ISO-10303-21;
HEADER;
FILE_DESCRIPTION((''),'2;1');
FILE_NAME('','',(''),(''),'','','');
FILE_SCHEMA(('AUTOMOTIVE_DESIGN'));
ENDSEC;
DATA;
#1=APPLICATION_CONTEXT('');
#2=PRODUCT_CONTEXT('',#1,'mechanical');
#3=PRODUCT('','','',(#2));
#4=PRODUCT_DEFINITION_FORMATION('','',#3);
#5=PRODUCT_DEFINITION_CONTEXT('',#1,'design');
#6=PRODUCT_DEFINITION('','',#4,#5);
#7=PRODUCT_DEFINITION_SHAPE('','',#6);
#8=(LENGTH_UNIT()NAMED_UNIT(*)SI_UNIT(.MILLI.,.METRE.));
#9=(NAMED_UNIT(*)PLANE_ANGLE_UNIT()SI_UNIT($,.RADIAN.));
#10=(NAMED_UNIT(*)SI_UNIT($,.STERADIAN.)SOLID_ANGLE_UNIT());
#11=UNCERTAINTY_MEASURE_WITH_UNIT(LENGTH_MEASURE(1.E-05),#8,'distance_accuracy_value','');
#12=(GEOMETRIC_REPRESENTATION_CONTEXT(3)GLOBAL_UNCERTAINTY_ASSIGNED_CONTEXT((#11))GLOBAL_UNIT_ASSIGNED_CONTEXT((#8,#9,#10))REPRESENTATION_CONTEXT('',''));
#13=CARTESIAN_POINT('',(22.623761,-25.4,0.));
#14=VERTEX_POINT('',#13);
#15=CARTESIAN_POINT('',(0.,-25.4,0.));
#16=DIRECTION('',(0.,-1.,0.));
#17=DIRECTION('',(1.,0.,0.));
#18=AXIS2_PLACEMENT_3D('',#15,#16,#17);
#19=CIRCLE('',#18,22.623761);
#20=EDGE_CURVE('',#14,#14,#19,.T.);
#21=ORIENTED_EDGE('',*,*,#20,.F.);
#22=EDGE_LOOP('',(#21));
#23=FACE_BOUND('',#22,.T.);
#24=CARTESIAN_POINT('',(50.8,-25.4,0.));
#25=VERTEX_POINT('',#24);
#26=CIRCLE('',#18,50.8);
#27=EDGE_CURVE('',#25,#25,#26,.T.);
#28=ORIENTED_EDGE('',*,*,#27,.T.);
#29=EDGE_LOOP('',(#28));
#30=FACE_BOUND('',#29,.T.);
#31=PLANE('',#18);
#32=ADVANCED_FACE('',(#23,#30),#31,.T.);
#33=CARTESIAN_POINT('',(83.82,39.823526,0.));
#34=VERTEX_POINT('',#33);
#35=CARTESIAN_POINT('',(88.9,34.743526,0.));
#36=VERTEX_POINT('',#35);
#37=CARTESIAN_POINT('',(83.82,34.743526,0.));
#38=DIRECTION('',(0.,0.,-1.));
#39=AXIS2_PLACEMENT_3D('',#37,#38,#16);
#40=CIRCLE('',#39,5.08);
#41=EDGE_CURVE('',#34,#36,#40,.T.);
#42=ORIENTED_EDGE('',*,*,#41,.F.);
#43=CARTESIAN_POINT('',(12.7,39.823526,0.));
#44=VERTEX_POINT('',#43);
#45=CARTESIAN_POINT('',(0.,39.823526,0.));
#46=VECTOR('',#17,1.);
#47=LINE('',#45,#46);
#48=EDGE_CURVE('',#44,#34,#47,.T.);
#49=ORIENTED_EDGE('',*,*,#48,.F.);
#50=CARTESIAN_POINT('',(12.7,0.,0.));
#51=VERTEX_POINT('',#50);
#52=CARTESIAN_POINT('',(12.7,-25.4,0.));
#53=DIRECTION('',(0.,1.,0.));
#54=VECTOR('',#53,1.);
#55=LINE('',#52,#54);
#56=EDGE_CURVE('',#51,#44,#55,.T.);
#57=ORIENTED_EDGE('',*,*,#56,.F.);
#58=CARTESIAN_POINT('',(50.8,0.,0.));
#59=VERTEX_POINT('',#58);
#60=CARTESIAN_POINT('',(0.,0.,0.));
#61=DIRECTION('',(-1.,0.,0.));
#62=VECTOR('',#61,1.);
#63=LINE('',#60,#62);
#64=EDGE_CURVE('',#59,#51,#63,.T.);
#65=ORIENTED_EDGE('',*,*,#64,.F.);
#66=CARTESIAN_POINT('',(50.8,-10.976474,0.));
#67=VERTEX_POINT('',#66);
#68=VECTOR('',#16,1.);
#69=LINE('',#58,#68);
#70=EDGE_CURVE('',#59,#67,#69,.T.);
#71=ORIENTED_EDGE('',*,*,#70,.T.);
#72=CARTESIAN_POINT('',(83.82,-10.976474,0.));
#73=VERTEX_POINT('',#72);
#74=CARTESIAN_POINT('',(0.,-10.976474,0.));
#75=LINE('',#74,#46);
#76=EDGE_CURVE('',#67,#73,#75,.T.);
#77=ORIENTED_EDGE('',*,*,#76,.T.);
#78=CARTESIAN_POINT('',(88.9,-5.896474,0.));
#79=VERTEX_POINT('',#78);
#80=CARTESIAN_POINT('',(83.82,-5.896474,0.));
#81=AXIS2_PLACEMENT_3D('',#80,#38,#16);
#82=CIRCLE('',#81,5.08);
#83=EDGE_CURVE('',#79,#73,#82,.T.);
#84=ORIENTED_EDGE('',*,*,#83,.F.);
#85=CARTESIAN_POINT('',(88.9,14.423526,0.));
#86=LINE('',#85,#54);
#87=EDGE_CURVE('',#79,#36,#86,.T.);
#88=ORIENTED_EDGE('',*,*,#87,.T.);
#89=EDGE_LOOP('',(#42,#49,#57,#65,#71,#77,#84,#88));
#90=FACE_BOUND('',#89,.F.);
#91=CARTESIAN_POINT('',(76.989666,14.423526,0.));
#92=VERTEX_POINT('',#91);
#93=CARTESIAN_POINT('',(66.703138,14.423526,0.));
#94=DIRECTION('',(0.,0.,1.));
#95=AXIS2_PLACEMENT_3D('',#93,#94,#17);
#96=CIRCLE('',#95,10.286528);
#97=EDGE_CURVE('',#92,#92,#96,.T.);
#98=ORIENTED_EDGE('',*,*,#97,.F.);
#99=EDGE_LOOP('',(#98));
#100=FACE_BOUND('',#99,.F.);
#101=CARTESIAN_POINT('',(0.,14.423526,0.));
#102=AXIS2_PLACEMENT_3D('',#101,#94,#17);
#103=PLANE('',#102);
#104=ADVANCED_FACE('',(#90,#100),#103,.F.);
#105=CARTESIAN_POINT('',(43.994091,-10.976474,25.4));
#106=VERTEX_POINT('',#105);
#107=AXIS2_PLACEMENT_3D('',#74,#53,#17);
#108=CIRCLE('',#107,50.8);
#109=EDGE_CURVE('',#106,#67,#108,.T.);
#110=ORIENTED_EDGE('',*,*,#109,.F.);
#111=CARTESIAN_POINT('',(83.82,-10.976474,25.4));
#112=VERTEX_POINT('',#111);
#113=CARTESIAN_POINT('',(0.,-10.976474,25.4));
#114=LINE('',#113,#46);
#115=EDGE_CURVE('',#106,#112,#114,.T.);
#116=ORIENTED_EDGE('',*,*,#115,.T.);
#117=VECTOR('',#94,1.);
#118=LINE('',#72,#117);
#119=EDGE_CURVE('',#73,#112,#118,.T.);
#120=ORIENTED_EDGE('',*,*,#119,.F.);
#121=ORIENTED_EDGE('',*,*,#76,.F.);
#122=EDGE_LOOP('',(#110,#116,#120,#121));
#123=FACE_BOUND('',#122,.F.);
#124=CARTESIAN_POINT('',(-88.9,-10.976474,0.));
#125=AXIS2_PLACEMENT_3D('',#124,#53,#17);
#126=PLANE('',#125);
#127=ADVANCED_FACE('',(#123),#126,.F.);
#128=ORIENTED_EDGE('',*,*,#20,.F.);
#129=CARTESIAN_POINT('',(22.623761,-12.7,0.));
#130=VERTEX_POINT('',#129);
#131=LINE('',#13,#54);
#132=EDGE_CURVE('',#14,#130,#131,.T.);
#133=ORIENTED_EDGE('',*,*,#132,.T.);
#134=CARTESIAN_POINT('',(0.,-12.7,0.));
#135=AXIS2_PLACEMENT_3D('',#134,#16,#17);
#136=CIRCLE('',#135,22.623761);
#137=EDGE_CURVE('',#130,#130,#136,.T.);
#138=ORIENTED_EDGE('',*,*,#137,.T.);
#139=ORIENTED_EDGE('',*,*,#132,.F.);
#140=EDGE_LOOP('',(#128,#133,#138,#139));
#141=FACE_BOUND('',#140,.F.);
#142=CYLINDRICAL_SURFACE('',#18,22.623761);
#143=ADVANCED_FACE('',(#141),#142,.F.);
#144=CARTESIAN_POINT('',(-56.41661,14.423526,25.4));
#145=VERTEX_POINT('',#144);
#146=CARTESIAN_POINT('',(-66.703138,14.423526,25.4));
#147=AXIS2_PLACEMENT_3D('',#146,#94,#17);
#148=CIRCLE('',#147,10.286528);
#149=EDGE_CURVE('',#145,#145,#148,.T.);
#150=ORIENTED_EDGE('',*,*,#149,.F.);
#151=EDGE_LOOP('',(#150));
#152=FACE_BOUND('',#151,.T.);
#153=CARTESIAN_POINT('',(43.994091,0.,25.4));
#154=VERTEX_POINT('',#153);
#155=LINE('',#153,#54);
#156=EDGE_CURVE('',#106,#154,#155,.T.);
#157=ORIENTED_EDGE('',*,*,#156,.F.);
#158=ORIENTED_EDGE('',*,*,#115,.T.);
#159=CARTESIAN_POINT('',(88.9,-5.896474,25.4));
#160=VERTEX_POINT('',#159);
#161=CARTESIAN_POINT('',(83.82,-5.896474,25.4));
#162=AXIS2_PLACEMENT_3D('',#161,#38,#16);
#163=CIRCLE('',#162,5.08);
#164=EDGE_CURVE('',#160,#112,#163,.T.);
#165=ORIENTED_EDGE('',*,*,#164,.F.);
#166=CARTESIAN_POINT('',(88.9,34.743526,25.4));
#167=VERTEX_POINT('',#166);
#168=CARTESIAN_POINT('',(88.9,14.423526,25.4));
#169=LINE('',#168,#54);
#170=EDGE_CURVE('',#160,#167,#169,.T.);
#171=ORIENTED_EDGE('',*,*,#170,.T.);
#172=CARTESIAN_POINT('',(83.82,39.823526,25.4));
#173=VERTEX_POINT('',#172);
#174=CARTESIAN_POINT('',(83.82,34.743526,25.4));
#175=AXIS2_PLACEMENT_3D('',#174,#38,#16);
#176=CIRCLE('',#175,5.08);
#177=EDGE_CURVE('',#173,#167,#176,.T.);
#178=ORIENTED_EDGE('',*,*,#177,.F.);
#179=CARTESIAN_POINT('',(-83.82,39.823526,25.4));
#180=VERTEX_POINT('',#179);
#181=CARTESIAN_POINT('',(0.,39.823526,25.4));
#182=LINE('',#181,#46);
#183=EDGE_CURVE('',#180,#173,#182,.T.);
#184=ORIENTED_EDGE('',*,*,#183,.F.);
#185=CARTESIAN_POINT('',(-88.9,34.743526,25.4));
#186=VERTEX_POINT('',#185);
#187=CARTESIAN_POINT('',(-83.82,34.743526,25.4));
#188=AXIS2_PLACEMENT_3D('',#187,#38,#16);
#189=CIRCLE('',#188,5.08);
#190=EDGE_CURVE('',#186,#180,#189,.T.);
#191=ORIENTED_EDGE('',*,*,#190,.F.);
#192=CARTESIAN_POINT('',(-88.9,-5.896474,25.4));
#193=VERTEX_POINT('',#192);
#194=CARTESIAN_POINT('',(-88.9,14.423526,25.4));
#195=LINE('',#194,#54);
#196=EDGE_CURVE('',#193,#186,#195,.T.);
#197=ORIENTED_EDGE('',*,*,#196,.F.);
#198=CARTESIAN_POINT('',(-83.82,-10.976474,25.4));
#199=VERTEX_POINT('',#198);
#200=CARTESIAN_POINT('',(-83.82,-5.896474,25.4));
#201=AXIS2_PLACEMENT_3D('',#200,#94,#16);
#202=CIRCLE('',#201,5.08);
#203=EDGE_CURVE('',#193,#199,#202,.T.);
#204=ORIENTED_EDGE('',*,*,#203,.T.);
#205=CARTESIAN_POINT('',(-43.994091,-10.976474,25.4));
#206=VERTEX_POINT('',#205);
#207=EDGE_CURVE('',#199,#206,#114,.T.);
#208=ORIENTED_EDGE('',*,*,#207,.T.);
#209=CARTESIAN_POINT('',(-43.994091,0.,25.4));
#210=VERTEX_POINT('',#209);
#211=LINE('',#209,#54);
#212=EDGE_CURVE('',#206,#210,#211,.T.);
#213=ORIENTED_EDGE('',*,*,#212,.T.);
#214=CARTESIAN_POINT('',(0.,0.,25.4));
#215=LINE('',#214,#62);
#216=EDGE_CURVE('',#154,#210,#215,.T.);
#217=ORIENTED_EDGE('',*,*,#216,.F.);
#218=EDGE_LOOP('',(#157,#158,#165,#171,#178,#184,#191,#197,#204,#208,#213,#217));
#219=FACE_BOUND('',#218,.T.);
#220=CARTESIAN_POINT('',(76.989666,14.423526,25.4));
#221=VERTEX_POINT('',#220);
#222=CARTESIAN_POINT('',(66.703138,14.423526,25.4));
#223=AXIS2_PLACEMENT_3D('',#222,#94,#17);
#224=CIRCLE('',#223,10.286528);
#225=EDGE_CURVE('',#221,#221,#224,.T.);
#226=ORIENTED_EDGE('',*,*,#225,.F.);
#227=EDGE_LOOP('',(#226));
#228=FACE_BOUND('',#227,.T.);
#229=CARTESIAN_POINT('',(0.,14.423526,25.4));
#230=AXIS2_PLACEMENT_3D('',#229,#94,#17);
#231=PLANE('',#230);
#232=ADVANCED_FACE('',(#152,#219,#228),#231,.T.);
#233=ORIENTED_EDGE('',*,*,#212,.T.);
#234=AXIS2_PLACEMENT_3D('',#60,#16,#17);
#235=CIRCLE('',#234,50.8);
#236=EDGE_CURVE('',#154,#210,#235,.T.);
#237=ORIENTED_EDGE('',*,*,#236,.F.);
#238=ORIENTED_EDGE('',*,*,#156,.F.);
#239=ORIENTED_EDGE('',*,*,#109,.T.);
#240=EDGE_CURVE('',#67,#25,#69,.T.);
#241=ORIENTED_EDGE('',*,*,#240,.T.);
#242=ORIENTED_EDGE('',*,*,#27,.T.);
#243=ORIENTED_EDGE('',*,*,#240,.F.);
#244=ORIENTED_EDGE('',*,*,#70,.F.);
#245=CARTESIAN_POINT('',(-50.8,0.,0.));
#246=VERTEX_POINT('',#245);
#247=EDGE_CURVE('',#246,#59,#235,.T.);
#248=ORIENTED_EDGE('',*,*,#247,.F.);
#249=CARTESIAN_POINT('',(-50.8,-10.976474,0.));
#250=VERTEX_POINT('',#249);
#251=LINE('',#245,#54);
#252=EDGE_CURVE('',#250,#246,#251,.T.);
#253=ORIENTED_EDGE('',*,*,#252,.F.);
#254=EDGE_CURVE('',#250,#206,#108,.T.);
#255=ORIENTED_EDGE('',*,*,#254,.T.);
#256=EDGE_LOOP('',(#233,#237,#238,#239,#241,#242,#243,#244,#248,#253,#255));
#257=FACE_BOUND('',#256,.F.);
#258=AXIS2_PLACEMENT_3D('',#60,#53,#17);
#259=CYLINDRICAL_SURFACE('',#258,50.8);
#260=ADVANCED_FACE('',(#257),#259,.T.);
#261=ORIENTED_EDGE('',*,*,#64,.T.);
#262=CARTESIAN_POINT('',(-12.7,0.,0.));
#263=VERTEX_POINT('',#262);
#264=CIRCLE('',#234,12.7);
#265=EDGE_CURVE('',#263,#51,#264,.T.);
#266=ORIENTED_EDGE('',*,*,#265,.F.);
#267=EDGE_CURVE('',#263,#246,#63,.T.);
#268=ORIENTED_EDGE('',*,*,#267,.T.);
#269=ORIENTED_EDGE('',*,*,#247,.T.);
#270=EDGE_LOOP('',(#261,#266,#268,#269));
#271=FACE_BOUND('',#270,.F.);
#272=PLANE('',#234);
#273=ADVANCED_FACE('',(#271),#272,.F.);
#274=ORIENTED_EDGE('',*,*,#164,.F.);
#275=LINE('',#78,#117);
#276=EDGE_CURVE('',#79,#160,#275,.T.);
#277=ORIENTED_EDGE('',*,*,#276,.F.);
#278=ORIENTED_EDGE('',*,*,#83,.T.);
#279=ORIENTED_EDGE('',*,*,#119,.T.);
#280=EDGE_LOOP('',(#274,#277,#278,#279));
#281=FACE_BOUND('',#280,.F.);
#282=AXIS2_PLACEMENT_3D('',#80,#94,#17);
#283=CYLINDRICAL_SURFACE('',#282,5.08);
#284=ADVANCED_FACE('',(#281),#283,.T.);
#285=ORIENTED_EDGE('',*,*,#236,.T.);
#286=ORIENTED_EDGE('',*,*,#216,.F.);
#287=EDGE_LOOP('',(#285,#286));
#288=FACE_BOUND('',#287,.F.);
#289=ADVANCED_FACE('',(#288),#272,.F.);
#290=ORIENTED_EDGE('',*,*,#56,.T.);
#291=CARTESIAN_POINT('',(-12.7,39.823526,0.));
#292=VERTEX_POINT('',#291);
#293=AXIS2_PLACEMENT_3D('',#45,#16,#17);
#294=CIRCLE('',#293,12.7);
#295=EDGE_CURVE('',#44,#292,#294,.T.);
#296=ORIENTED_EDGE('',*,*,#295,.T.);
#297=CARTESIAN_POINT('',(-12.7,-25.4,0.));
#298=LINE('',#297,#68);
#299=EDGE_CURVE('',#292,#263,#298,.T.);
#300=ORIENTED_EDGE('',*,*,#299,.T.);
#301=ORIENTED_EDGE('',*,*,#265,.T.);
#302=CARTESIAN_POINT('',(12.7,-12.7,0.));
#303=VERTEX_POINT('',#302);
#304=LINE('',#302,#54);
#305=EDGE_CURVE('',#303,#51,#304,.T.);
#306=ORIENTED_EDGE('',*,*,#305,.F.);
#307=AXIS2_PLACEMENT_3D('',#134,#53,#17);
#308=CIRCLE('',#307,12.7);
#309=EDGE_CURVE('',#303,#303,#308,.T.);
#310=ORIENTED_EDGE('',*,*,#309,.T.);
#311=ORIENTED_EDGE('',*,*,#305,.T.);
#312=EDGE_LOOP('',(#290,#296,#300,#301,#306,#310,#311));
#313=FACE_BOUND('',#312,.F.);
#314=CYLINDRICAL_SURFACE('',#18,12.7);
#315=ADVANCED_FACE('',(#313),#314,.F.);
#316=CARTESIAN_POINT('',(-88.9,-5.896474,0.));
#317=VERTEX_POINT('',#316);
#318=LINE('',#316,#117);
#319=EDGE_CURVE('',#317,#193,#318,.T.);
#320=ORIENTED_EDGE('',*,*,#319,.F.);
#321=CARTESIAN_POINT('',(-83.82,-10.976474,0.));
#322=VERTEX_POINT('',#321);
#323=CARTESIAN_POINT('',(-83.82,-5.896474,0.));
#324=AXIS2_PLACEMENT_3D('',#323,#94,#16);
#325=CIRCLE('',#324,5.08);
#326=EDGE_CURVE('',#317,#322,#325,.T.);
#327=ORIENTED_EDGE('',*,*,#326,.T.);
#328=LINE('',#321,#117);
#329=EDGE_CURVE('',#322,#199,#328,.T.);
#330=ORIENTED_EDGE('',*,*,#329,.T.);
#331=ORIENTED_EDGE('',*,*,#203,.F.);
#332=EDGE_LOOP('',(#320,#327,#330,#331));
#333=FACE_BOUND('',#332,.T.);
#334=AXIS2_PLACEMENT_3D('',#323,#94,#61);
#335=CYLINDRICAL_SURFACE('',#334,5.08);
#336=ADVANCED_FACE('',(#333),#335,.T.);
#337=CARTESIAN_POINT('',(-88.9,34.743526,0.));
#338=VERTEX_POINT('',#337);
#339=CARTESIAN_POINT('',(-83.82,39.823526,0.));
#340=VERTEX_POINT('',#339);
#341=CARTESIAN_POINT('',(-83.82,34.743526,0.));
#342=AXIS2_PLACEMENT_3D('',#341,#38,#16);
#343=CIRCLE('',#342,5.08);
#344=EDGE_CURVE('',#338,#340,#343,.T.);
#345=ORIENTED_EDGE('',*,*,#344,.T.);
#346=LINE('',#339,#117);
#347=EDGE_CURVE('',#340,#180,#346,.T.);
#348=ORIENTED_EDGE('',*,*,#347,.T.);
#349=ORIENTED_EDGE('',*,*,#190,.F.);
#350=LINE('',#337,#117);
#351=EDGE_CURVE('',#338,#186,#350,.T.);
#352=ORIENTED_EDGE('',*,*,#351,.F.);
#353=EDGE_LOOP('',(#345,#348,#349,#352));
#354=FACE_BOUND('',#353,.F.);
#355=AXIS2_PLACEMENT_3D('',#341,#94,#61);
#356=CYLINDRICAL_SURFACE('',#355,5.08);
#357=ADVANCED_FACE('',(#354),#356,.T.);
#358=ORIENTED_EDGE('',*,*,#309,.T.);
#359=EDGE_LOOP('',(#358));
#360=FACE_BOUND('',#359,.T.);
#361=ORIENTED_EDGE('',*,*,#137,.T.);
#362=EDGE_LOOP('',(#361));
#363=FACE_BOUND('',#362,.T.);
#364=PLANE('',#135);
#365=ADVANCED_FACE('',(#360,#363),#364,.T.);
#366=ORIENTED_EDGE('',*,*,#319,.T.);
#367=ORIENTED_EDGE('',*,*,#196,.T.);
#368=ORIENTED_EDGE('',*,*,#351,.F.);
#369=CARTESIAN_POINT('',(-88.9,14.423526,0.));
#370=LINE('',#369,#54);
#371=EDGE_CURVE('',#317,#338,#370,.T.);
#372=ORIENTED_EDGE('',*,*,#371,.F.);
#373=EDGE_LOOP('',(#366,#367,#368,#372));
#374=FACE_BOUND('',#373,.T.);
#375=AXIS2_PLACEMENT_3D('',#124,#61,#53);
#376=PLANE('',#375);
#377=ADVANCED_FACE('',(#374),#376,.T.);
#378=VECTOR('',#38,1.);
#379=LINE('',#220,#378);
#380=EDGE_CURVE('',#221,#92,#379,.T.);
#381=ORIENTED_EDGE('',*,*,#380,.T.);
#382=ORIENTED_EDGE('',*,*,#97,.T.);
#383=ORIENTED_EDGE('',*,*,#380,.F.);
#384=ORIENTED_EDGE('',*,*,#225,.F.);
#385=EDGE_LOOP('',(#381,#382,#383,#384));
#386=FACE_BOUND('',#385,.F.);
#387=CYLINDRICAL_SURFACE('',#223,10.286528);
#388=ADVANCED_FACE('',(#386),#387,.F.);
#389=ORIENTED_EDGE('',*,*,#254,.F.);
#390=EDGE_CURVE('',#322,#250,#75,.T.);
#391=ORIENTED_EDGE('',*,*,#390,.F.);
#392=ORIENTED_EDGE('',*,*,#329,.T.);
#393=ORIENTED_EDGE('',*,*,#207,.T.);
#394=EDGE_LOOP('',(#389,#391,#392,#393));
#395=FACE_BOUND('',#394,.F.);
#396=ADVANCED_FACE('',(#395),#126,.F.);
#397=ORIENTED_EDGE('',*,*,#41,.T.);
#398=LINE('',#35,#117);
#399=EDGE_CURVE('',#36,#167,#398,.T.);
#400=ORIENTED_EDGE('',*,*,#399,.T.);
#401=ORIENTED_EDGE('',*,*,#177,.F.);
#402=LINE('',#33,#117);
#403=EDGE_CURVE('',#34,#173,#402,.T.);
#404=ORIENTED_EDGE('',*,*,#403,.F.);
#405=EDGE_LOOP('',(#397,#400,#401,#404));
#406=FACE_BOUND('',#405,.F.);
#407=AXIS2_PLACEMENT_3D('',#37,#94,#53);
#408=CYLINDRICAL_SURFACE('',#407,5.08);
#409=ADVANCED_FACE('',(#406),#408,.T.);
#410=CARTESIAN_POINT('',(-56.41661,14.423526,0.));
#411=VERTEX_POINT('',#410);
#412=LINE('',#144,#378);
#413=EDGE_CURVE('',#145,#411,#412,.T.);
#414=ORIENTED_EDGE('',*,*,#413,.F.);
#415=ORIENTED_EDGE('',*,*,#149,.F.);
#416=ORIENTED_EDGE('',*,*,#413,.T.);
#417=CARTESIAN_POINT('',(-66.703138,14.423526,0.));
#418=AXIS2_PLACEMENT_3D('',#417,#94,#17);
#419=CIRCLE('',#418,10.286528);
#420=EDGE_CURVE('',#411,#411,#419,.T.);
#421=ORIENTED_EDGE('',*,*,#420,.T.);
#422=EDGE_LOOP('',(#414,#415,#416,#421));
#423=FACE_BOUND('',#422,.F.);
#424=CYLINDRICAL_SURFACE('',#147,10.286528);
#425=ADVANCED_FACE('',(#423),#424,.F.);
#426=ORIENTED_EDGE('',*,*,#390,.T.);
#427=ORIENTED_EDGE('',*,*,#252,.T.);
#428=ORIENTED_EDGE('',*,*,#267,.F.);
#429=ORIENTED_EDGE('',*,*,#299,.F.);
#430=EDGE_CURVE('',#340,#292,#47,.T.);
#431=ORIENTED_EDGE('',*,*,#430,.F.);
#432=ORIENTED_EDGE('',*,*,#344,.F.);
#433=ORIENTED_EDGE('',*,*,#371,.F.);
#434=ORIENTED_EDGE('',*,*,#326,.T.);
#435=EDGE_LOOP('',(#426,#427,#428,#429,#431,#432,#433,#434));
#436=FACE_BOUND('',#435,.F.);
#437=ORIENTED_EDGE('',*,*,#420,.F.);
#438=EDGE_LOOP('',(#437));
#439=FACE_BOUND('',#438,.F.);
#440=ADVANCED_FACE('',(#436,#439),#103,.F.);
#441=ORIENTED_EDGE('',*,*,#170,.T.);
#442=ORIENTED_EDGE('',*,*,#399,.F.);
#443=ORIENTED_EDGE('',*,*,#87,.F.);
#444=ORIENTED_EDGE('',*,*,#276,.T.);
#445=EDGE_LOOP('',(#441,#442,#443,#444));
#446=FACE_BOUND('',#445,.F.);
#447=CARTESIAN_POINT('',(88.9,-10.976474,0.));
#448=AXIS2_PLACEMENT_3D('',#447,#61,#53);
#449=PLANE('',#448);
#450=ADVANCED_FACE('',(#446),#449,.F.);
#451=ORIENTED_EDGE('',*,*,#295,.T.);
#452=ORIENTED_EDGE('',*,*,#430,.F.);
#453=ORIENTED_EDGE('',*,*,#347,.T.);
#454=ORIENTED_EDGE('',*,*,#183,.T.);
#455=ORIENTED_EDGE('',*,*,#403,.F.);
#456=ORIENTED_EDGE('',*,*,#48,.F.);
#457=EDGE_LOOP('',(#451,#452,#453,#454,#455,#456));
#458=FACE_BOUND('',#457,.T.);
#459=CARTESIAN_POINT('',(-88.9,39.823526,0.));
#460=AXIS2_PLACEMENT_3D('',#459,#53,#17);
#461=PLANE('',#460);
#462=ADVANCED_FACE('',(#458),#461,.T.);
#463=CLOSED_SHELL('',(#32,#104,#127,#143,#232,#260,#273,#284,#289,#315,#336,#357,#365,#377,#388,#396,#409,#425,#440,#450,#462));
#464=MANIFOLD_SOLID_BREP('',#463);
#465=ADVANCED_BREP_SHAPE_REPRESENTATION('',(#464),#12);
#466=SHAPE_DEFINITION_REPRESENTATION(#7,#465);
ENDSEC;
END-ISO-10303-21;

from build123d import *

# Parameters (mm, degrees)
F0_R      = 50.8
F0_R_2    = 12.7
F1_DEPTH  = 25.4
F2_W      = 177.8
F2_H      = 50.8
F3_DEPTH  = 25.4
F5_R      = 22.6237609961
F6_DEPTH  = 12.7
F7_R      = 10.2865280917
F8_DEPTH  = 25.4
F9_R      = 5.08
F11_R     = 12.7
F12_DEPTH = 76.2


# Not quite as in the source:
# - a feature names something its author has since deleted; it is built from what else it names


with BuildPart() as f1:
    # F0 (on Front) → F1 (new body)
    with BuildSketch(Plane.XZ):
        Circle(F0_R)
        Circle(F0_R_2, mode=Mode.SUBTRACT)
    extrude(amount=F1_DEPTH)

    # F2 (on Top) → F3 (join)
    with BuildSketch(Plane.XY):
        with Locations((0, 14.4235261992)):
            Rectangle(F2_W, F2_H)
    extrude(amount=F3_DEPTH)

    # F4: union 

    # F5 (on face) → F6 (cut)
    with BuildSketch(Plane.XZ.offset(25.4)):
        Circle(F5_R)
    extrude(amount=-F6_DEPTH, mode=Mode.SUBTRACT)

    # F7 (on face) → F8 (cut)
    with BuildSketch(Plane.XY.offset(25.4)):
        with Locations((-66.7031380003, 14.4235261992)):
            Circle(F7_R)
        with Locations((66.7031380003, 14.4235261992)):
            Circle(F7_R)
    extrude(amount=-F8_DEPTH, mode=Mode.SUBTRACT)

    # F9
    f9_edges = [f1.edges().sort_by_distance(p)[0] for p in [
        (88.9, 39.823526, 12.7),
        (-88.9, 39.823526, 12.7),
        (-88.9, -10.976474, 12.7),
        (88.9, -10.976474, 12.7),
    ]]
    fillet(f9_edges, radius=F9_R)

    # F11 (on face) → F12 (cut)
    with BuildSketch(Plane.XZ.offset(25.4)):
        Circle(F11_R)
    extrude(amount=-F12_DEPTH, mode=Mode.SUBTRACT)


solid = f1.part
